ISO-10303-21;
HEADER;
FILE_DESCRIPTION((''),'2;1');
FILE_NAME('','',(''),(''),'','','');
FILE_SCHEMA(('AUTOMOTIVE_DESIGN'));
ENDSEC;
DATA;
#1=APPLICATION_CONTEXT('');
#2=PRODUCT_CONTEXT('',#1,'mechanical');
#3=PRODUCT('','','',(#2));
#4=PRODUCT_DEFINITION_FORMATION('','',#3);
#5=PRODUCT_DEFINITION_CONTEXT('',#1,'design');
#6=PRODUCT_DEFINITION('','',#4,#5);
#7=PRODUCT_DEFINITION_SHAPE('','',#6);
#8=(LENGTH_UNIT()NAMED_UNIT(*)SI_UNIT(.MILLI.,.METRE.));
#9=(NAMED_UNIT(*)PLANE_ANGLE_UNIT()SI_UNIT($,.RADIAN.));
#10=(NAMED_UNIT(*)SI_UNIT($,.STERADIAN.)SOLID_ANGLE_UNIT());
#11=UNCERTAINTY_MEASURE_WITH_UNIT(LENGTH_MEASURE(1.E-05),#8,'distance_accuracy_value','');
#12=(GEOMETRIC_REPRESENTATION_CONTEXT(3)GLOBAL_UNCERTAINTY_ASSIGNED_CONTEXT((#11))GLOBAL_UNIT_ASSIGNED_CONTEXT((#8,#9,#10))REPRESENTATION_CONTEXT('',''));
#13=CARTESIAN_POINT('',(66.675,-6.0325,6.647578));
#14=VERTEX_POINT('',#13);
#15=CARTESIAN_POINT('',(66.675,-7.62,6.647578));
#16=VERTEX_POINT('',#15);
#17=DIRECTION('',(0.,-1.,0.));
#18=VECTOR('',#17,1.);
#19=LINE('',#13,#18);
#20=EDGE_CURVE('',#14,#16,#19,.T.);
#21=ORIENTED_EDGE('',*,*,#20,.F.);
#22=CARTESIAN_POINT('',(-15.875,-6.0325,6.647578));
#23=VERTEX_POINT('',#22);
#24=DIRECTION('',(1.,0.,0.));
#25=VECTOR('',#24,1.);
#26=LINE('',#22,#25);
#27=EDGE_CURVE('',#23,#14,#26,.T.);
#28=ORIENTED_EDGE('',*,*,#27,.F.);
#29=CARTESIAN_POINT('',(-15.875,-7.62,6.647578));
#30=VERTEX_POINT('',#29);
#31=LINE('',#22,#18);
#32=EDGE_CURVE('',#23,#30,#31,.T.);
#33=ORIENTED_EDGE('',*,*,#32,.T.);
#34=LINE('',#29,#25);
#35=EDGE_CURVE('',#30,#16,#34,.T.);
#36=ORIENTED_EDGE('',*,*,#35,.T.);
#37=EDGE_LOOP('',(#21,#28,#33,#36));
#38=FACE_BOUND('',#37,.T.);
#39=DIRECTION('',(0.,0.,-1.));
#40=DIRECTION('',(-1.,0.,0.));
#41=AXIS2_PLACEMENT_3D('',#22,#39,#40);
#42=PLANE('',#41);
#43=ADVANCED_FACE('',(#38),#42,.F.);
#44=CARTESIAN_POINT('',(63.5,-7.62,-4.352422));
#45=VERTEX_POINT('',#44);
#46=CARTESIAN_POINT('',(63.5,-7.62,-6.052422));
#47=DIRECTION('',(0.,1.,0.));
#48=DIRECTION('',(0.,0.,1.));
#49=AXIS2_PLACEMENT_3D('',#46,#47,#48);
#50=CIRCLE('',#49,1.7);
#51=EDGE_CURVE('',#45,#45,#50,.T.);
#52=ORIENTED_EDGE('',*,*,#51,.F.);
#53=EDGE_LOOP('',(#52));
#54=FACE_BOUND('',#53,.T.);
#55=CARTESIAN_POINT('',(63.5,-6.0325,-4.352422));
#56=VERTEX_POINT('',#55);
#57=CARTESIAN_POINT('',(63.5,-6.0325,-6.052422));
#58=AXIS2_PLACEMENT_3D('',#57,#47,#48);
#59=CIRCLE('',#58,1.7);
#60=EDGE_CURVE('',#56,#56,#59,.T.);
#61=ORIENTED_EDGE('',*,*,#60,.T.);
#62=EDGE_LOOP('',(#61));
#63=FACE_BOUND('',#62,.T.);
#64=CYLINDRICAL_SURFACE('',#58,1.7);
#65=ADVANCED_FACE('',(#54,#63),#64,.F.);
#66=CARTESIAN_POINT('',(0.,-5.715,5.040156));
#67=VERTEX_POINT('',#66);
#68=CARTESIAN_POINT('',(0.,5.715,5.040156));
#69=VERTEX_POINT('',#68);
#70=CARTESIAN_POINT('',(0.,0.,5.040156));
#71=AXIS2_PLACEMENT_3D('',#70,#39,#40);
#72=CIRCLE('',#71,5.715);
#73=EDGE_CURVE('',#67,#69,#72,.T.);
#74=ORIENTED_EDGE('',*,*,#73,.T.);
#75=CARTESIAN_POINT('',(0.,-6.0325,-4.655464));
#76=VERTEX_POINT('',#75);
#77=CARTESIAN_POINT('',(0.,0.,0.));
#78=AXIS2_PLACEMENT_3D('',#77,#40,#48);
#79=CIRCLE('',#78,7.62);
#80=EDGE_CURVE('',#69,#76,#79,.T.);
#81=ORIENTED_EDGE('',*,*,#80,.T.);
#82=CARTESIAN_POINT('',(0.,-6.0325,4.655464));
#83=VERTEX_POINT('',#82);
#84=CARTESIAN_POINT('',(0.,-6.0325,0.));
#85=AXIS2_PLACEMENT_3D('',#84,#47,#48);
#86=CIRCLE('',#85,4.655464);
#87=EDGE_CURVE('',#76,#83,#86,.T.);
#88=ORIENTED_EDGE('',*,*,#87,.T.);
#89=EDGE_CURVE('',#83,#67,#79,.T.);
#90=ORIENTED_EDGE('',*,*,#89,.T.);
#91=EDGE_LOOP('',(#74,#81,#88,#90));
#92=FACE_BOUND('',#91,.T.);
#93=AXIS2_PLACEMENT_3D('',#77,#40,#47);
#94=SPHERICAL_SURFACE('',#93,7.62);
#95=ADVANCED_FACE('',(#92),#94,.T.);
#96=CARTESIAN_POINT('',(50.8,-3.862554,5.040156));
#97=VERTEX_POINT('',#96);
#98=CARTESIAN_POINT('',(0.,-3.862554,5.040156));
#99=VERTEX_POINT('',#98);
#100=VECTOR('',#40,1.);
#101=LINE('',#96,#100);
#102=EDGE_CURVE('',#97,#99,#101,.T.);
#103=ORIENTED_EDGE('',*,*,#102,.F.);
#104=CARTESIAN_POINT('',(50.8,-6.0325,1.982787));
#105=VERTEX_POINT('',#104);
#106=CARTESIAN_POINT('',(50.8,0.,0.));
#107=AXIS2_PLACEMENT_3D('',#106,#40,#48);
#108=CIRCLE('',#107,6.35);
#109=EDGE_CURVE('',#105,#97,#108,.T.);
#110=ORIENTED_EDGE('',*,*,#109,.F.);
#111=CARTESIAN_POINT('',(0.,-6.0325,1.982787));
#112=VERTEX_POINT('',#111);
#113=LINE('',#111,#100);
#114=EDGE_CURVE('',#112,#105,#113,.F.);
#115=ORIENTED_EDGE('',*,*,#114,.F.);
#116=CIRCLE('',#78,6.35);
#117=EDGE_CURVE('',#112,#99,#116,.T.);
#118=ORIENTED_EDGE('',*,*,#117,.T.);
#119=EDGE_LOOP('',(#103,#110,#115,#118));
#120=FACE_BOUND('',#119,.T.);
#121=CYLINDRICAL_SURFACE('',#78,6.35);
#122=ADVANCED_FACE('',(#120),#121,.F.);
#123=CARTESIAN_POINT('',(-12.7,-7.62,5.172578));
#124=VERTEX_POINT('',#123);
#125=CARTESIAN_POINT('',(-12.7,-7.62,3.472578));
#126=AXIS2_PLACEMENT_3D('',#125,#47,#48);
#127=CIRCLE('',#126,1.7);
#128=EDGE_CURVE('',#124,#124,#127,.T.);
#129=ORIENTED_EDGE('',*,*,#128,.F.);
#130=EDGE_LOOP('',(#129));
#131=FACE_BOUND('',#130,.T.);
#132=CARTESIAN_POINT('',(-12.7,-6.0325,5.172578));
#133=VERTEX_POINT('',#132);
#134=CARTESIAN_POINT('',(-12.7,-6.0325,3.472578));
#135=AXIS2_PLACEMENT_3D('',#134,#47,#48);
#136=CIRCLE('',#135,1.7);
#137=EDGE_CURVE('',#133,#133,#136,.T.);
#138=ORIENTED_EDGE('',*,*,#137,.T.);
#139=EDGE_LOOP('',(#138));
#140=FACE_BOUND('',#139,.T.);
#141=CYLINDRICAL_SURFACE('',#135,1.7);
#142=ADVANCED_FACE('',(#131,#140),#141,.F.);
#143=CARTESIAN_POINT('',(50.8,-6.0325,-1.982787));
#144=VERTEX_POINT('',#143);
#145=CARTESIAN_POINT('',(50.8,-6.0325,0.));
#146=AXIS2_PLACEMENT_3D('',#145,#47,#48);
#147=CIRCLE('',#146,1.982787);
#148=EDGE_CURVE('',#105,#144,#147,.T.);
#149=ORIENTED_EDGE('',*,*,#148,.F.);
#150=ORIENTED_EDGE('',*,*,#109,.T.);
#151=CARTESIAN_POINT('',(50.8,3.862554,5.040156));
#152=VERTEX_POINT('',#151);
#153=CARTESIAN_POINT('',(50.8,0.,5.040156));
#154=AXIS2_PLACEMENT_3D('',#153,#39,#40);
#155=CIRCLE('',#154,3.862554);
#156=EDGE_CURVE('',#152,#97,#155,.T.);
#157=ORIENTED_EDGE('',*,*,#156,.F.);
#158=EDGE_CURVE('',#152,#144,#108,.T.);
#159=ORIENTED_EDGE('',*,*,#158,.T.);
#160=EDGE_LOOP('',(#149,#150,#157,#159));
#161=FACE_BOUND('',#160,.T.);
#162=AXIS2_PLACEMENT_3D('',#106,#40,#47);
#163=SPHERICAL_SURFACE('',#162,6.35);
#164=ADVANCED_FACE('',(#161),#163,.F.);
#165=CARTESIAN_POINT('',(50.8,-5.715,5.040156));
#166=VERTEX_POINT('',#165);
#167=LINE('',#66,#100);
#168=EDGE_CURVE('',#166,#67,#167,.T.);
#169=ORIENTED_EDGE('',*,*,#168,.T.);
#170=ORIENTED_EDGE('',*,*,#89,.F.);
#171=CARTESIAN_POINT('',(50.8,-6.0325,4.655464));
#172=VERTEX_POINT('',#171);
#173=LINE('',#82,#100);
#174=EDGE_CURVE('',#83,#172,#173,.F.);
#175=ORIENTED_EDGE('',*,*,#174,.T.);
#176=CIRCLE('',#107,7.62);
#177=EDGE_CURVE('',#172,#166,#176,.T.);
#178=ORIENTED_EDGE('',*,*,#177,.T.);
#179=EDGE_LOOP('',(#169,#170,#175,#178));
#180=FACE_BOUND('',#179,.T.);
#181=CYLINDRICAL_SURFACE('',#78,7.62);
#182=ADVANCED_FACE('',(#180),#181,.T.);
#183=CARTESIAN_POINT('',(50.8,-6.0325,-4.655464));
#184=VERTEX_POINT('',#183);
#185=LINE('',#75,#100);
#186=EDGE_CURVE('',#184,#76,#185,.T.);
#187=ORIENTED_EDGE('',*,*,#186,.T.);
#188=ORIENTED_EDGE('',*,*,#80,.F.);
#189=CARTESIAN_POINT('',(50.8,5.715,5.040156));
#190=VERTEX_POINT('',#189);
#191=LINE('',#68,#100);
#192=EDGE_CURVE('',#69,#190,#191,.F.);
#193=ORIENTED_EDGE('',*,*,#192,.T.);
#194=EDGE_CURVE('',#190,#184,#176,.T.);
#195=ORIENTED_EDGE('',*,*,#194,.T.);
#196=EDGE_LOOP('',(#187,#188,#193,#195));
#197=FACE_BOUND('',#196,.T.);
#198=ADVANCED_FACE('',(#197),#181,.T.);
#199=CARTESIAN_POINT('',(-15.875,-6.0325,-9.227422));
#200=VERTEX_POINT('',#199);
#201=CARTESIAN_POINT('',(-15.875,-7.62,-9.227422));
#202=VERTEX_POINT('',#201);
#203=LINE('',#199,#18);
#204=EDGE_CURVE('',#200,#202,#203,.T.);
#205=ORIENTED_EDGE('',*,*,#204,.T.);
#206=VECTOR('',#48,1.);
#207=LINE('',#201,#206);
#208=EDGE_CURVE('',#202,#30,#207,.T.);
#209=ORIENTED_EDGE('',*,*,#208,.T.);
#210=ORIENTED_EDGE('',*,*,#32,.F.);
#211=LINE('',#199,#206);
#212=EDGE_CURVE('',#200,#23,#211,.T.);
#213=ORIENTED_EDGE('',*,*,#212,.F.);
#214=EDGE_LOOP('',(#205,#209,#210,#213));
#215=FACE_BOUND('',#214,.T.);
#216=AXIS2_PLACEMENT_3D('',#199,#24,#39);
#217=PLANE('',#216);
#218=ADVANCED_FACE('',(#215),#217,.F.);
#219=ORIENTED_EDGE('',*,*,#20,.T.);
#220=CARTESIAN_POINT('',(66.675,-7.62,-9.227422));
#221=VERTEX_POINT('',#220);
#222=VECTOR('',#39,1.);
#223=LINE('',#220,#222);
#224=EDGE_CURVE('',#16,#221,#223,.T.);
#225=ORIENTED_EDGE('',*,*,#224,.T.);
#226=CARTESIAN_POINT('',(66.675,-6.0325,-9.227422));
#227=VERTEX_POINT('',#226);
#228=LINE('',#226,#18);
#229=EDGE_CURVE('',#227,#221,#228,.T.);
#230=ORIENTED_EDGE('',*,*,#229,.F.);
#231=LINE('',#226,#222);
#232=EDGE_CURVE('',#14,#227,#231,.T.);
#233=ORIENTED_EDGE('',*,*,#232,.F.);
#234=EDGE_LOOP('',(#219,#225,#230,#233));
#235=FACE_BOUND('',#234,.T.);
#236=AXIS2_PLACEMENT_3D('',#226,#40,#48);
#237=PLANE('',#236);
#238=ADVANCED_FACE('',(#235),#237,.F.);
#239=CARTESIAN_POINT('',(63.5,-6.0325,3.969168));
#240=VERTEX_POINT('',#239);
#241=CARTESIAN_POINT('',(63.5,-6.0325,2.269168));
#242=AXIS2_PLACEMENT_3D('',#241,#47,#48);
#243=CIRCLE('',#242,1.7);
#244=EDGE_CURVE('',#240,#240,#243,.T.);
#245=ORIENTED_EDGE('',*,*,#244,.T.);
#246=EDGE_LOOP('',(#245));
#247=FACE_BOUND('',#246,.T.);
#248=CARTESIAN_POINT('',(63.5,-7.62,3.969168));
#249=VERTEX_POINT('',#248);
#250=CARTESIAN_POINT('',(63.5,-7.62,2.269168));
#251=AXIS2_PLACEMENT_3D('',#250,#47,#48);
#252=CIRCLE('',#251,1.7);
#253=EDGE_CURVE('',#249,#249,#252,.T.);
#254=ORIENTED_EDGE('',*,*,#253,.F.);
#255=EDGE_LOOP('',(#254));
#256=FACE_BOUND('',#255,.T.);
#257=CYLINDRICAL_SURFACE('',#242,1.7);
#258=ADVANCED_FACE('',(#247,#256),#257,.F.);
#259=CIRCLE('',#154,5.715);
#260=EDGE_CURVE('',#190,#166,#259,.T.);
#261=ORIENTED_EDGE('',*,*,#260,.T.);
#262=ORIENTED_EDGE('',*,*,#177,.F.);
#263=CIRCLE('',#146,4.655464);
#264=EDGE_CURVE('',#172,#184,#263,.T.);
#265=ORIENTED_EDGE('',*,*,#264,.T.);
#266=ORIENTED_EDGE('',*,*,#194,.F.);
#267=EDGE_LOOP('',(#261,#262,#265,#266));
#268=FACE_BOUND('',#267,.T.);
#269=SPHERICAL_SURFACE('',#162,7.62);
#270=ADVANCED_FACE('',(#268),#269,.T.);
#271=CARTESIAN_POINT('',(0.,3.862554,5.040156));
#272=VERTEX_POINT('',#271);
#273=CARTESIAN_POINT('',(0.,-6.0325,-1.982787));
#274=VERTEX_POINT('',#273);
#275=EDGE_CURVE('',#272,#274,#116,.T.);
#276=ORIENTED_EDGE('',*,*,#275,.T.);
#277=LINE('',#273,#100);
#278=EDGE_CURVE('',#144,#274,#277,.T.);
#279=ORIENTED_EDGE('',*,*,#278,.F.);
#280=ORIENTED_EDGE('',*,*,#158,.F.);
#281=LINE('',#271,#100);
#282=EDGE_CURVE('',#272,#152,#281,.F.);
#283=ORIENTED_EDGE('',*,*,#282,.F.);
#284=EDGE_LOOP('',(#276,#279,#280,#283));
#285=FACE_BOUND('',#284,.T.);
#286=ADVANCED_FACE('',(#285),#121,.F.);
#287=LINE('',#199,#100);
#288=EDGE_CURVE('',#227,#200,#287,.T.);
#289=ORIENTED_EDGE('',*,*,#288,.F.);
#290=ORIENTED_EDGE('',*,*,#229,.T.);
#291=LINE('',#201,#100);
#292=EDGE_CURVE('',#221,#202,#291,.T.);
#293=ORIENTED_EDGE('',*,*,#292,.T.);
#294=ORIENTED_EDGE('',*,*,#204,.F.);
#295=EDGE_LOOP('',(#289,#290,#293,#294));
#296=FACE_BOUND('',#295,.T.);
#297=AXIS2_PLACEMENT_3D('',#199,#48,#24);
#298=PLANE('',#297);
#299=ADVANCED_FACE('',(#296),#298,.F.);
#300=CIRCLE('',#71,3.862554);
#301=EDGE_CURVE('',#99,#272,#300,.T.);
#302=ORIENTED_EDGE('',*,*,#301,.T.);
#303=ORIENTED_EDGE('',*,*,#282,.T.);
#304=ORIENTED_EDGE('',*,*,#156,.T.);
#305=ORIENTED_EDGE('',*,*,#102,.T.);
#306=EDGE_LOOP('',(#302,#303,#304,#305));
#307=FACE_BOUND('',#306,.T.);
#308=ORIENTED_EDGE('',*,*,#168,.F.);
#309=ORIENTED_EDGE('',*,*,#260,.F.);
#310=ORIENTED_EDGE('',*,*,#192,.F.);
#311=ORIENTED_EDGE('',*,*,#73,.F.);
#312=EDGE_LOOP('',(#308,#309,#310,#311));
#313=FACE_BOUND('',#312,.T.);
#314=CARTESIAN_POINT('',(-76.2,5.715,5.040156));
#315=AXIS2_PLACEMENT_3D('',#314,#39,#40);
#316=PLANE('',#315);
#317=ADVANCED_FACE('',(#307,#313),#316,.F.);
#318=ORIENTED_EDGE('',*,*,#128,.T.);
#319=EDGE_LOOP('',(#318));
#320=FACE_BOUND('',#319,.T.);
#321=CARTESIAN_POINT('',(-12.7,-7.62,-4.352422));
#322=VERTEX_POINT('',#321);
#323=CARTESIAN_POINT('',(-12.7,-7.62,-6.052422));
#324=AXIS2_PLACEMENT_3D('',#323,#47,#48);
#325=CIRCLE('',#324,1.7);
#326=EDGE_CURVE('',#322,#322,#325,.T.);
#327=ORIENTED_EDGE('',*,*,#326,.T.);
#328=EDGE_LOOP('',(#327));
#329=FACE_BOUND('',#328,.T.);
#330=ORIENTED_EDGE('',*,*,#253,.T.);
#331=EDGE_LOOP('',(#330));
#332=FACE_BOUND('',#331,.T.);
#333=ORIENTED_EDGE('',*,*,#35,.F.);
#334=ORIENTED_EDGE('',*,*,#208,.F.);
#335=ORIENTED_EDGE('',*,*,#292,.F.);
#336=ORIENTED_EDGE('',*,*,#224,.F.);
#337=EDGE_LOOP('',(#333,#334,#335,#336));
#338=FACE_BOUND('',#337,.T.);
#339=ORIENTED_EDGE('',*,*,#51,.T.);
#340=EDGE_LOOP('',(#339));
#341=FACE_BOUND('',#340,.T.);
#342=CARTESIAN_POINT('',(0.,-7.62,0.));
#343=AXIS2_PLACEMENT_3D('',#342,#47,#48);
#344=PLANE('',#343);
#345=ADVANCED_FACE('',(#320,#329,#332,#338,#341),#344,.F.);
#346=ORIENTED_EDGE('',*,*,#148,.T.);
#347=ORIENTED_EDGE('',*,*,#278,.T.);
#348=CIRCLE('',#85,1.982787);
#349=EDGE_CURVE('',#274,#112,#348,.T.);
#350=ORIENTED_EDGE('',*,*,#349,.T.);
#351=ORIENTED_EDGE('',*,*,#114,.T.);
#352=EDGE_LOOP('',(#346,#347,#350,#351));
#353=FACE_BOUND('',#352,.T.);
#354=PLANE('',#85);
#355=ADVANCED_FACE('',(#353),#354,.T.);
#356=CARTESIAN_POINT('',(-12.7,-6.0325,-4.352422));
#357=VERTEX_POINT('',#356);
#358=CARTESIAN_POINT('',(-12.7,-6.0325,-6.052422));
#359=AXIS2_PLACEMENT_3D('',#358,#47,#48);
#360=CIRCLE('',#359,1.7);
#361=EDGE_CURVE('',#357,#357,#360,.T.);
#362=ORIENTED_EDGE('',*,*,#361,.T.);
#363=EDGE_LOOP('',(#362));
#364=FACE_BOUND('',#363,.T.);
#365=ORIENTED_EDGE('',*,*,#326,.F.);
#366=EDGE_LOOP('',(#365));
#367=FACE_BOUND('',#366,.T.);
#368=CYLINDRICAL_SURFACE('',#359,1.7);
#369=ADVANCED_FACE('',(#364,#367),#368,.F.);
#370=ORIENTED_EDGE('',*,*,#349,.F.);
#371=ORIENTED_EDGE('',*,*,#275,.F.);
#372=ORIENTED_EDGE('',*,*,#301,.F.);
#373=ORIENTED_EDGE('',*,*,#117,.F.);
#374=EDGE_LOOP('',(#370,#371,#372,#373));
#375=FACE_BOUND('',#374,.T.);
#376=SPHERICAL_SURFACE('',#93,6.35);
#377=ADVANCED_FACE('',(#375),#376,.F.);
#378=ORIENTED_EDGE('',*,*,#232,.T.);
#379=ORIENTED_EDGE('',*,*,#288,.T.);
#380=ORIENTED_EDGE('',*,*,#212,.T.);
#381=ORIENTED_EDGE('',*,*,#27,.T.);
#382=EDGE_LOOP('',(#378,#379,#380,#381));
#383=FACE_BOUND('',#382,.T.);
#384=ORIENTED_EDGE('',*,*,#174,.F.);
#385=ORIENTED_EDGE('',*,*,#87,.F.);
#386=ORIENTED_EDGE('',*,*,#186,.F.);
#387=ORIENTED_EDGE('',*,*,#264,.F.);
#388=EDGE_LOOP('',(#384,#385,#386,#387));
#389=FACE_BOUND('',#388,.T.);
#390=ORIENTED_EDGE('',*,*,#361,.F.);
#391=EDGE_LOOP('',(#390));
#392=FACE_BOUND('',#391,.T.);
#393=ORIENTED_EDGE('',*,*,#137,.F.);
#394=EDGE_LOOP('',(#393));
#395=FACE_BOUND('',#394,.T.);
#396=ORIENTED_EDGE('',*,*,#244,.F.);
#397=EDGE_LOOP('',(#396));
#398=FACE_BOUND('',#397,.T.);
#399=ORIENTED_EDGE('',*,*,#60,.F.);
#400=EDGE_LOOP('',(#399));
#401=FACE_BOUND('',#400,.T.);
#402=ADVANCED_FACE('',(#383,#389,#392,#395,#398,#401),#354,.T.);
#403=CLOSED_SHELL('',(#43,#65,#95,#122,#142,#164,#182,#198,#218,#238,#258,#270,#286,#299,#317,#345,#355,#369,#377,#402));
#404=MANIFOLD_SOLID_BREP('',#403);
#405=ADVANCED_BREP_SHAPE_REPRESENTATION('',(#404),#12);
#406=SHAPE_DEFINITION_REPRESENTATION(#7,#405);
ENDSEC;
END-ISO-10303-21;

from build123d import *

# Parameters (mm, degrees)
SKETCH2_W            = 5.08
SKETCH2_H            = 11.43
CUT_EXTRUDE1_DEPTH   = 76.2
SKETCH3_W            = 82.55
SKETCH3_H            = 15.875
BOSS_EXTRUDE1_DEPTH  = 1.5875
M3_CLEARANCE_HOLE1_D = 3.4


# Read off the part's stored shape, not the designer's step: Shell1
with BuildPart() as part:
    # Sketch1 → Revolve1 (revolve)
    with BuildSketch(Plane.XY):
        with BuildLine():
            Line((0, 7.62), (50.8, 7.62))
            ThreePointArc((50.8, 7.62), (56.188153673, 5.388153673), (58.42, 0))
            Line((58.42, 0), (-7.62, 0))
            ThreePointArc((-7.62, 0), (-5.388153673, 5.388153673), (0, 7.62))
        make_face()
    revolve(axis=Axis((0, 0, 0), (1, 0, 0)))

    # Sketch2 → Cut-Extrude1 (cut, symmetric)
    with BuildSketch(Plane(origin=(0, 0, 0), x_dir=(0, 0, -1), z_dir=(1, 0, 0))):
        with Locations((-7.580156248, 0)):
            Rectangle(SKETCH2_W, SKETCH2_H)
    extrude(amount=CUT_EXTRUDE1_DEPTH, both=True, mode=Mode.SUBTRACT)

    # Shell1 outline → Shell1 (revolve, cut)
    with BuildSketch(Plane.YX):
        with BuildLine():
            Line((0, 57.15), (0, -6.35))
            ThreePointArc((0, -6.35), (4.490128063, -4.490128058), (6.35, 6e-09))
            Line((6.35, 6e-09), (6.35, 50.799999994))
            ThreePointArc((6.35, 50.799999994), (4.490128063, 55.290128058), (0, 57.15))
        make_face()
    revolve(axis=Axis((0, 0, 0), (1, 0, 0)), mode=Mode.SUBTRACT)

    # Sketch3 → Boss-Extrude1 (add)
    with BuildSketch(Plane(origin=(0, -7.62, 0), x_dir=(1, 0, 0), z_dir=(0, 1, 0))):
        with Locations((25.4, 1.289921876)):
            Rectangle(SKETCH3_W, SKETCH3_H)
    extrude(amount=BOSS_EXTRUDE1_DEPTH)

    # M3 Clearance Hole1 (through all)
    with Locations(Plane(origin=(0, -6.0325, 0), x_dir=(1, 0, 0), z_dir=(0, 1, 0))):
        with Locations((-12.7, 6.052421876), (-12.7, -3.472578124), (63.5, 6.052421876), (63.5, -2.26916829)):
            Hole(M3_CLEARANCE_HOLE1_D / 2)


solid = part.part
